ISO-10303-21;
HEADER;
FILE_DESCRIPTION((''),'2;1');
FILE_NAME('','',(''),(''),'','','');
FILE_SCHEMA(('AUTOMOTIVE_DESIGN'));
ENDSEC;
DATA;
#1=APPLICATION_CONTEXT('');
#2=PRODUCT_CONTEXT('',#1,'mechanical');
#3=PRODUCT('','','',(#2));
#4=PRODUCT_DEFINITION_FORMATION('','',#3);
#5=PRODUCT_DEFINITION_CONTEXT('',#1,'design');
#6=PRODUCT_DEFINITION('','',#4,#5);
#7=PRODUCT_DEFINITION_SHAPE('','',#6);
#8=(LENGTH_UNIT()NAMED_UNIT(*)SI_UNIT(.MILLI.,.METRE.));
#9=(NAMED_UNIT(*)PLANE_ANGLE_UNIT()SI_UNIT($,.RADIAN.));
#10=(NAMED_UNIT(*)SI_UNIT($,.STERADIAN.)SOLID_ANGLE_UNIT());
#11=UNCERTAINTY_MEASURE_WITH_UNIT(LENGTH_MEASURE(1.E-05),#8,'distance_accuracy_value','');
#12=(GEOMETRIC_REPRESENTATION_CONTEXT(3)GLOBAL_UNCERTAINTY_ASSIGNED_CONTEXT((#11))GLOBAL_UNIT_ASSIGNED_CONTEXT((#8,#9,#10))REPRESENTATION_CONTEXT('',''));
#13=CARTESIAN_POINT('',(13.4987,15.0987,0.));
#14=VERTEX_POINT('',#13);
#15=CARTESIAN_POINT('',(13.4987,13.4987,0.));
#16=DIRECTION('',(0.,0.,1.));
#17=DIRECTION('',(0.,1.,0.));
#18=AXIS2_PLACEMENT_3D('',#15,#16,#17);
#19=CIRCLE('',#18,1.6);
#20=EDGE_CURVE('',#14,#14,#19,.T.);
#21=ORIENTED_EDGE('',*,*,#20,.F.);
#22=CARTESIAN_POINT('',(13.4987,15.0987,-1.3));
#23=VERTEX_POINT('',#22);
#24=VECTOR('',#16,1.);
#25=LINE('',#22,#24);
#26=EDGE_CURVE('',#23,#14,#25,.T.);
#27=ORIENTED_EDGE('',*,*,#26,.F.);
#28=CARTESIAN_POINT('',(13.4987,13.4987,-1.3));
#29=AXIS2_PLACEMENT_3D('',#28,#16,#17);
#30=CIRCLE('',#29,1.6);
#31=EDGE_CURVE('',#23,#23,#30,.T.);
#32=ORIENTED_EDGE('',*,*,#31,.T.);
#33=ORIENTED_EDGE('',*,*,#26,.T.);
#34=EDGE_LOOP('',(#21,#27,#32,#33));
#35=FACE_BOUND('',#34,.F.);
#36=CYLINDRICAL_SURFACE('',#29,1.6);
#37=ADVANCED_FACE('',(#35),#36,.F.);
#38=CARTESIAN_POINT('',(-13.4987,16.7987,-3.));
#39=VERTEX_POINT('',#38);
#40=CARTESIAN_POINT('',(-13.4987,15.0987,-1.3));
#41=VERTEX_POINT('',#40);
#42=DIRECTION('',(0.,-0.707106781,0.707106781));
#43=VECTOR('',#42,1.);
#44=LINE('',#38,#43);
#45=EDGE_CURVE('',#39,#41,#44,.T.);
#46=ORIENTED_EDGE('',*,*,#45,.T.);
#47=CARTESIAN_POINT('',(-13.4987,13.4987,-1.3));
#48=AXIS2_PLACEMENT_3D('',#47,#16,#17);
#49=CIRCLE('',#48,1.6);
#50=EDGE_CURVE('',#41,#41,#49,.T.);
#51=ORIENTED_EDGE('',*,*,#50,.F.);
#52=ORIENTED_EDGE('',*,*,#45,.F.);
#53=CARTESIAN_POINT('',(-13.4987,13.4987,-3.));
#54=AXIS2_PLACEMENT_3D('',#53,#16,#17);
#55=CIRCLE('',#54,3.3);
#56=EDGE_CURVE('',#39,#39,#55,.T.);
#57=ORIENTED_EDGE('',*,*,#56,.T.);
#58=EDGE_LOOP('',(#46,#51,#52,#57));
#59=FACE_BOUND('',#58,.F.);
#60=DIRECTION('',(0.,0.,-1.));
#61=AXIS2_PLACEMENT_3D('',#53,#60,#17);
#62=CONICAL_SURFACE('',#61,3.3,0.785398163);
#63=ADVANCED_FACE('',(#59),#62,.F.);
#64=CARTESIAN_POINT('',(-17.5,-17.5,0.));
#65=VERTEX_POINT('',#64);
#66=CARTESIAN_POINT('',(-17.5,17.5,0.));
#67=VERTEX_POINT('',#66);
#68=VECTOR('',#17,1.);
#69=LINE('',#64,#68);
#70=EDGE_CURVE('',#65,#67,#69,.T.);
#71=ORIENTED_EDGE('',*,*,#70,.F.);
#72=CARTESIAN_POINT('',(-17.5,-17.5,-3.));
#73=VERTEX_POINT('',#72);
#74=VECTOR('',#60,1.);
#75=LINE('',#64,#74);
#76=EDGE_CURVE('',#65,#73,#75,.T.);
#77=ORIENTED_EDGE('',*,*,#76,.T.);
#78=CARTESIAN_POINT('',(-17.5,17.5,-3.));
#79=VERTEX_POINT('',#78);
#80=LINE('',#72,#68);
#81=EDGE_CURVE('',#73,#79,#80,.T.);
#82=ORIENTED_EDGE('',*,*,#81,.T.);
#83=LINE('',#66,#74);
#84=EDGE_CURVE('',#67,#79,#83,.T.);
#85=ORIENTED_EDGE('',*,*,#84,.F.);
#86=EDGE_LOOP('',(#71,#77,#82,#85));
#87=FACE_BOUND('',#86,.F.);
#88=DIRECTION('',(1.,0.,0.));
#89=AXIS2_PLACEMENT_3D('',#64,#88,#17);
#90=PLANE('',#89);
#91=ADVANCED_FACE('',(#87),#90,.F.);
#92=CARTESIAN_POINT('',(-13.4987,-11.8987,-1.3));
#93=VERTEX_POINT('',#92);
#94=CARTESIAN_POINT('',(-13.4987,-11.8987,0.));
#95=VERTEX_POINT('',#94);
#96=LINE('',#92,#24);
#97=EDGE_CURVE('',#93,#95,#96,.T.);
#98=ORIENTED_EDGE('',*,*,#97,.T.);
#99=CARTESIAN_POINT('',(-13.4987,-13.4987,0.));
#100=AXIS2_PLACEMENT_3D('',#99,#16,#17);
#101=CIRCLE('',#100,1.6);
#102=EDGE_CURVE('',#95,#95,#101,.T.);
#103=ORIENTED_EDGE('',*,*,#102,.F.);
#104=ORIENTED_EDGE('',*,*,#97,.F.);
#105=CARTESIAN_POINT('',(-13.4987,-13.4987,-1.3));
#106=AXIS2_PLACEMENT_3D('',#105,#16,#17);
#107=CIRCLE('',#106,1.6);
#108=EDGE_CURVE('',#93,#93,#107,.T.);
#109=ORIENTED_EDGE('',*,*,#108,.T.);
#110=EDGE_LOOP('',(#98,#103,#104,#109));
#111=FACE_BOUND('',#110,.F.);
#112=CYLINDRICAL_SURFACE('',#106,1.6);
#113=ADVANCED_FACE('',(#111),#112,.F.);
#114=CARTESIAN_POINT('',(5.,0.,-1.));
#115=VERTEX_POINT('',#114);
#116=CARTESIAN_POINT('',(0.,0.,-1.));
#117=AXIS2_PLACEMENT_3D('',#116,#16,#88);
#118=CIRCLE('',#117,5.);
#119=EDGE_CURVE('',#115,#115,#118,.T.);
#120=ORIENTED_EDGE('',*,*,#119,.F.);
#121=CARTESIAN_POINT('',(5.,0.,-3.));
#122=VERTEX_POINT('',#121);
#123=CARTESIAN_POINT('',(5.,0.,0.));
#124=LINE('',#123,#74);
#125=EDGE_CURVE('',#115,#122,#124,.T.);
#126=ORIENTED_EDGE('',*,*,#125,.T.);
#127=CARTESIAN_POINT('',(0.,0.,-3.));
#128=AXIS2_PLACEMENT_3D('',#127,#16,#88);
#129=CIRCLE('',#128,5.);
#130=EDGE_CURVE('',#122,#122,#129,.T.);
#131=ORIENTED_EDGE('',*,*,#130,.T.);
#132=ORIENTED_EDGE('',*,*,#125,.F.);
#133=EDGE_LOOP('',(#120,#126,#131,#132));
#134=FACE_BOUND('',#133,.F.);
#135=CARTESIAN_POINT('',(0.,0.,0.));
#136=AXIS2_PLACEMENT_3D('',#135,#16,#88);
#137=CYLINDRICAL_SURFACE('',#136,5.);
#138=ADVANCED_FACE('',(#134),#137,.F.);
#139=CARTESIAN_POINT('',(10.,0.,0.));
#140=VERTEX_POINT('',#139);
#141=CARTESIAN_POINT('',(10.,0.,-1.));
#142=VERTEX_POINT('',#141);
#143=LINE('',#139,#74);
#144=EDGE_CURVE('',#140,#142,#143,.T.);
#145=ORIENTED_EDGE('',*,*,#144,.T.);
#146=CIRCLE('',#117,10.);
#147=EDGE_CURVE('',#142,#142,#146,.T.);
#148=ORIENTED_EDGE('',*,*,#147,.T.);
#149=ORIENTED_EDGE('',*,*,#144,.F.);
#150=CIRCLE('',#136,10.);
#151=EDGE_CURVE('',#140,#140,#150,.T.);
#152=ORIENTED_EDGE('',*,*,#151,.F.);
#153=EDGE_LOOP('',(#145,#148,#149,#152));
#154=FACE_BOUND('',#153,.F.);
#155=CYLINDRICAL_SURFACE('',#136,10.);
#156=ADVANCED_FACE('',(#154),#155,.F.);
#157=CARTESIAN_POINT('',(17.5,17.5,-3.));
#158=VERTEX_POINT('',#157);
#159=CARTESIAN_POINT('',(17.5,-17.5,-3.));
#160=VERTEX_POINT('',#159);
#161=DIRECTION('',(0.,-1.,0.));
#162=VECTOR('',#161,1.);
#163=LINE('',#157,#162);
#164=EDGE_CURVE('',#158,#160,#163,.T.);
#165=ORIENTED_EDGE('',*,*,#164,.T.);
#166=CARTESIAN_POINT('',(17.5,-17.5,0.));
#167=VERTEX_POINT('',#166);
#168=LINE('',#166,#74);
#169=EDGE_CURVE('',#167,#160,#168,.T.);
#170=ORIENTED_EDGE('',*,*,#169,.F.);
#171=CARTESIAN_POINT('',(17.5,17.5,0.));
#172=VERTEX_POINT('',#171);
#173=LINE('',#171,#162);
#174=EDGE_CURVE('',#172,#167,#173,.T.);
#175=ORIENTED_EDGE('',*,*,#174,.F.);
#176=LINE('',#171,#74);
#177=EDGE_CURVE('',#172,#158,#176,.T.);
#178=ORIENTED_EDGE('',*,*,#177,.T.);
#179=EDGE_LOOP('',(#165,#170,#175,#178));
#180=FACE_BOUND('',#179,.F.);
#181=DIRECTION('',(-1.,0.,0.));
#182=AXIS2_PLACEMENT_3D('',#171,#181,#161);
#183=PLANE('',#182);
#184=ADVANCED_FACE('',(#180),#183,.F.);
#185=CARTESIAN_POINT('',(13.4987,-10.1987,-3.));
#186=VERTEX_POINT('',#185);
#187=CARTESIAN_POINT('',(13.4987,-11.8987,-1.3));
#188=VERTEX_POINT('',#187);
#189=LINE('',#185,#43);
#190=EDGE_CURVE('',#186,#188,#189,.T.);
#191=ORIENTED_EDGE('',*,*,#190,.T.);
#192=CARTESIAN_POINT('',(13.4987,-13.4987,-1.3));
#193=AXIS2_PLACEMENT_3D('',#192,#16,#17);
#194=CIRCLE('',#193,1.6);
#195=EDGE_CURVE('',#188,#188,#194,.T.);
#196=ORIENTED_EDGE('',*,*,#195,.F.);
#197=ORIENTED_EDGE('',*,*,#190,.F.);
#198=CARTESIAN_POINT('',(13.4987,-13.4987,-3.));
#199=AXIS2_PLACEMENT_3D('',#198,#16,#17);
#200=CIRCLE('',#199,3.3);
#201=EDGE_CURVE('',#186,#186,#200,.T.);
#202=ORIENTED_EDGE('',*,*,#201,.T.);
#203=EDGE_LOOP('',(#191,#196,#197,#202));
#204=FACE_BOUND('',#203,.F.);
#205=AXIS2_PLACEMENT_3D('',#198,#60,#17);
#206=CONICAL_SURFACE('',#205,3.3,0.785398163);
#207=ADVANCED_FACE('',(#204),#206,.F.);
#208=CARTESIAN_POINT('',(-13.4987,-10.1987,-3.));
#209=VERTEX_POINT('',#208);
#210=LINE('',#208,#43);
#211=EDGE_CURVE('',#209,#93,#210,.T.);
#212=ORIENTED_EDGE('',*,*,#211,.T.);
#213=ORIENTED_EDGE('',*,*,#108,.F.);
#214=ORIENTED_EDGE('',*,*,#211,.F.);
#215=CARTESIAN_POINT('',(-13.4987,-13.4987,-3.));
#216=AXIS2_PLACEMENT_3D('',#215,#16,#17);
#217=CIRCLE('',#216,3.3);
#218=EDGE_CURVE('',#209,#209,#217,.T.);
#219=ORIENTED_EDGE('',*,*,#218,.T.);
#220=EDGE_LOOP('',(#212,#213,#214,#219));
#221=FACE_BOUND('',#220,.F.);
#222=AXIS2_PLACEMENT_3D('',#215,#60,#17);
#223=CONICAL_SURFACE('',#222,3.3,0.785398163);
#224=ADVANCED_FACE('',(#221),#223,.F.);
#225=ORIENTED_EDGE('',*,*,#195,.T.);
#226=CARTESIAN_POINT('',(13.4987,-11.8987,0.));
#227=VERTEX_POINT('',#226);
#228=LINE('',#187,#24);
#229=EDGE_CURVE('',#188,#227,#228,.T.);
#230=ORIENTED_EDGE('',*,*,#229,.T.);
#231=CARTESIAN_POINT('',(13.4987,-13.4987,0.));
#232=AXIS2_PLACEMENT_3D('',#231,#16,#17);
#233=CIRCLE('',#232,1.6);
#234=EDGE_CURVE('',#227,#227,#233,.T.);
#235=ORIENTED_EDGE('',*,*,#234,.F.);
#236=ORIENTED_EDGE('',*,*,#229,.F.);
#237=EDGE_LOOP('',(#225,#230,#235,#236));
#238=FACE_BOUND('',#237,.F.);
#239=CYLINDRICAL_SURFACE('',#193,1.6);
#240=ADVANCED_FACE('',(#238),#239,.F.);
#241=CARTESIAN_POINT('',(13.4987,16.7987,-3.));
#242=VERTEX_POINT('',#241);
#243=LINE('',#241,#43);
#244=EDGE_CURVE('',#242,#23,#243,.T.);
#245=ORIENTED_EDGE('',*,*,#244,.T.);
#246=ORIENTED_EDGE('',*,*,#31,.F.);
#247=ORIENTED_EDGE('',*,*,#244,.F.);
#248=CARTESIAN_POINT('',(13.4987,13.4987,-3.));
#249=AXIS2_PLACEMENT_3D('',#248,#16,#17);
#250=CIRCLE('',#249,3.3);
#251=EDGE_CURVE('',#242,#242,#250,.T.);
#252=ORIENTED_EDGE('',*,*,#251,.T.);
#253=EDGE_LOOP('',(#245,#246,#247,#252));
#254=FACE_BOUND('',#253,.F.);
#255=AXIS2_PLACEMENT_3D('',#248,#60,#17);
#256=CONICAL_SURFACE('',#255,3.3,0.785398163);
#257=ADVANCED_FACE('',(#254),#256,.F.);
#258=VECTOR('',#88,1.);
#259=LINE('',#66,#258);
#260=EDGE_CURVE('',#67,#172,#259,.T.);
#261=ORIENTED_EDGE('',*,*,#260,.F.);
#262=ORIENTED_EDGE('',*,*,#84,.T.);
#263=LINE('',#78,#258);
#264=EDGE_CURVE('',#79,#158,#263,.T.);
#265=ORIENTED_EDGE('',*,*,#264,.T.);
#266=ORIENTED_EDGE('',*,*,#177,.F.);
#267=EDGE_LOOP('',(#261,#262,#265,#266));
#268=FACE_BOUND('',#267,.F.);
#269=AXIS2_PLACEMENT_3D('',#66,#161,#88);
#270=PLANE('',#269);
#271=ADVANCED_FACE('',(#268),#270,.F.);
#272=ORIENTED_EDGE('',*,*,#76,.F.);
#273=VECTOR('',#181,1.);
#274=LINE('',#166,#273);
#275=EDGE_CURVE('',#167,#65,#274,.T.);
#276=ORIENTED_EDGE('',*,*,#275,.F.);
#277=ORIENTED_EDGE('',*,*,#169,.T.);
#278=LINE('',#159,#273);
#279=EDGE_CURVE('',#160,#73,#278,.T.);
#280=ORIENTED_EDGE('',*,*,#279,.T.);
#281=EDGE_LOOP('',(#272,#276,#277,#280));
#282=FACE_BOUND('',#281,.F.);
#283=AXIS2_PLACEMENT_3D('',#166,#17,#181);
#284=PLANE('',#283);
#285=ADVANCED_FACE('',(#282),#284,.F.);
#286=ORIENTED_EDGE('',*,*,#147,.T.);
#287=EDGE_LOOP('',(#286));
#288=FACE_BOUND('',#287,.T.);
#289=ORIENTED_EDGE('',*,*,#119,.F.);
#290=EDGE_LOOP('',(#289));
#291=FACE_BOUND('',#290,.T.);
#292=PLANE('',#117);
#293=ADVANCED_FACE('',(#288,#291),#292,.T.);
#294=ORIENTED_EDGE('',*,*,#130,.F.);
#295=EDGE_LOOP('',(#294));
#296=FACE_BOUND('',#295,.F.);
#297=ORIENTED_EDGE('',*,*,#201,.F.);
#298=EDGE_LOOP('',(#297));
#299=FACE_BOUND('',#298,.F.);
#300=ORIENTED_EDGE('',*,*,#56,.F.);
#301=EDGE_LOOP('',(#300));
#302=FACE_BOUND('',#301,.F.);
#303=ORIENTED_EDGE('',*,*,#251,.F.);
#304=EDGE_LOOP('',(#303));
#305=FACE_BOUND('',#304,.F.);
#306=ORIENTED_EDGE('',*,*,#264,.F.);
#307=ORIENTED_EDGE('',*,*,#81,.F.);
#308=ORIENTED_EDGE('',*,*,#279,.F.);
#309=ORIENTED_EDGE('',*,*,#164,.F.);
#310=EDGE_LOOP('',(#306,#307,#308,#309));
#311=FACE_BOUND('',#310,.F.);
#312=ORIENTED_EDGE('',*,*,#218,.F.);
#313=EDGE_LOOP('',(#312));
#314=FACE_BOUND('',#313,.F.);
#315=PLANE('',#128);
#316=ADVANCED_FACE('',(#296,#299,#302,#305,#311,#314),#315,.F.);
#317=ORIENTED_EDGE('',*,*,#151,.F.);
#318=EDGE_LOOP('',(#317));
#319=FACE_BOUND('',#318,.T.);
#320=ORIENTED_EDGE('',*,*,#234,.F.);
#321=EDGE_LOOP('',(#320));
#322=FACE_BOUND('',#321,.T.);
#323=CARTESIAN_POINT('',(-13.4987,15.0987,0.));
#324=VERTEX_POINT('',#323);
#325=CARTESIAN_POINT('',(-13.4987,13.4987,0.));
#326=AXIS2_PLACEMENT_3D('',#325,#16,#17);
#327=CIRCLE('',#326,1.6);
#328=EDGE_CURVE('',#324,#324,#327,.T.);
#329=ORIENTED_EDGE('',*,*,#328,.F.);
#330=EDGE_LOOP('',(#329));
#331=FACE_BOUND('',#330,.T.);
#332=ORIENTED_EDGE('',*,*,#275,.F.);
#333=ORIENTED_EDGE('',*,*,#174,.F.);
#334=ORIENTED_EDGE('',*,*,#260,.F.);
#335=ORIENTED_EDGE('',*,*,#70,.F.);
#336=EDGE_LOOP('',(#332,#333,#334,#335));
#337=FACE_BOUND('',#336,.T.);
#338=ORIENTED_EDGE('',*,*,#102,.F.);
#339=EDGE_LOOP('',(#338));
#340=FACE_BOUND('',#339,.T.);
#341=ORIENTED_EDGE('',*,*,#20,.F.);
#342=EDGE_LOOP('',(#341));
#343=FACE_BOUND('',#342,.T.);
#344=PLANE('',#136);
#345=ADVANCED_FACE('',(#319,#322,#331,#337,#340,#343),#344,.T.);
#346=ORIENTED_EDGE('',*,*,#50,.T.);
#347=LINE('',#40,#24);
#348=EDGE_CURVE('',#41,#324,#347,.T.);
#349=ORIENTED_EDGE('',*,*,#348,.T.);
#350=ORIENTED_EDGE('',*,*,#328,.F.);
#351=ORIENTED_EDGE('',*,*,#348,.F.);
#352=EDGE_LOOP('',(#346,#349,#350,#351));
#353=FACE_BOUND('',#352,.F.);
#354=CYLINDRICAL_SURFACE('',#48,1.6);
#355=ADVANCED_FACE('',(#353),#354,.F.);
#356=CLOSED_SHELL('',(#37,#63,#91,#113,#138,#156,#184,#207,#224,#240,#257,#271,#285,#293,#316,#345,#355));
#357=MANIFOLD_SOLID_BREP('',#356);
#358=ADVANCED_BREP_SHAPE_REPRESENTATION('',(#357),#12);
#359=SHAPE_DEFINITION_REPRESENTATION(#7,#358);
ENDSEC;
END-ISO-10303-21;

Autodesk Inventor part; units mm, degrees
ref_plane "YZ Plane" through (0, 0, 0) normal (1, 0, 0) x (0, 1, 0)
ref_plane "XZ Plane" through (0, 0, 0) normal (0, 1, 0) x (-1, 0, 0)
ref_plane "XY Plane" through (0, 0, 0) normal (0, 0, 1) x (1, 0, 0)
sketch "Sketch1" plane through (0, 0, 0) normal (0, 0, 1) x (1, 0, 0)
  line L0 (17.5, -17.5) -> (-17.5, -17.5)
  line L1 (-17.5, -17.5) -> (-17.5, 17.5)
  line L2 (-17.5, 17.5) -> (17.5, 17.5)
  line L3 (17.5, 17.5) -> (17.5, -17.5)
  line L4 (17.5, -17.5) -> (-17.5, 17.5) construction
  line L5 (-17.5, -17.5) -> (17.5, 17.5) construction
  circle A0 centre (-13.4987, -13.4987) radius 1.5
  circle A1 centre (13.4987, -13.4987) radius 1.5
  circle A2 centre (13.4987, 13.4987) radius 1.5
  circle A3 centre (-13.4987, 13.4987) radius 1.5
  circle A4 centre (0, 0) radius 5
  circle A5 centre (0, 0) radius 10
  dimension "d0" = 35
  dimension "d1" = 35
  dimension "d3" = 3
  dimension "d6" = 360
  dimension "d8" = 10
  dimension "d9" = 20
extrude "Extrusion1" add sketch "Sketch1" against normal blind 3 contours L0 L1 L2 L3 | A0 | A1 | A2 | A3 | A5
extrude "Extrusion2" cut sketch "Sketch1" against normal blind 1 contours A5
sketch "Sketch2" plane through (0, 0, -3) normal (0, 0, -1) x (-1, 0, 0)
  circle A0 centre (13.4987, 13.4987) radius 1.5 projected
  circle A1 centre (-13.4987, 13.4987) radius 1.5 projected
  circle A2 centre (-13.4987, -13.4987) radius 1.5 projected
  circle A3 centre (13.4987, -13.4987) radius 1.5 projected
  point P0 (0, 0)
hole "Hole2" at (13.4987, 13.4987, -3) at (-13.4987, 13.4987, -3) at (-13.4987, -13.4987, -3) at (13.4987, -13.4987, -3) direction (0, 0, 1) diameter 3.2 depth 3 countersink diameter 6.6 countersink angle 90
properties part number "АНЦП.014.00.00.004" material "PET Plastic"
